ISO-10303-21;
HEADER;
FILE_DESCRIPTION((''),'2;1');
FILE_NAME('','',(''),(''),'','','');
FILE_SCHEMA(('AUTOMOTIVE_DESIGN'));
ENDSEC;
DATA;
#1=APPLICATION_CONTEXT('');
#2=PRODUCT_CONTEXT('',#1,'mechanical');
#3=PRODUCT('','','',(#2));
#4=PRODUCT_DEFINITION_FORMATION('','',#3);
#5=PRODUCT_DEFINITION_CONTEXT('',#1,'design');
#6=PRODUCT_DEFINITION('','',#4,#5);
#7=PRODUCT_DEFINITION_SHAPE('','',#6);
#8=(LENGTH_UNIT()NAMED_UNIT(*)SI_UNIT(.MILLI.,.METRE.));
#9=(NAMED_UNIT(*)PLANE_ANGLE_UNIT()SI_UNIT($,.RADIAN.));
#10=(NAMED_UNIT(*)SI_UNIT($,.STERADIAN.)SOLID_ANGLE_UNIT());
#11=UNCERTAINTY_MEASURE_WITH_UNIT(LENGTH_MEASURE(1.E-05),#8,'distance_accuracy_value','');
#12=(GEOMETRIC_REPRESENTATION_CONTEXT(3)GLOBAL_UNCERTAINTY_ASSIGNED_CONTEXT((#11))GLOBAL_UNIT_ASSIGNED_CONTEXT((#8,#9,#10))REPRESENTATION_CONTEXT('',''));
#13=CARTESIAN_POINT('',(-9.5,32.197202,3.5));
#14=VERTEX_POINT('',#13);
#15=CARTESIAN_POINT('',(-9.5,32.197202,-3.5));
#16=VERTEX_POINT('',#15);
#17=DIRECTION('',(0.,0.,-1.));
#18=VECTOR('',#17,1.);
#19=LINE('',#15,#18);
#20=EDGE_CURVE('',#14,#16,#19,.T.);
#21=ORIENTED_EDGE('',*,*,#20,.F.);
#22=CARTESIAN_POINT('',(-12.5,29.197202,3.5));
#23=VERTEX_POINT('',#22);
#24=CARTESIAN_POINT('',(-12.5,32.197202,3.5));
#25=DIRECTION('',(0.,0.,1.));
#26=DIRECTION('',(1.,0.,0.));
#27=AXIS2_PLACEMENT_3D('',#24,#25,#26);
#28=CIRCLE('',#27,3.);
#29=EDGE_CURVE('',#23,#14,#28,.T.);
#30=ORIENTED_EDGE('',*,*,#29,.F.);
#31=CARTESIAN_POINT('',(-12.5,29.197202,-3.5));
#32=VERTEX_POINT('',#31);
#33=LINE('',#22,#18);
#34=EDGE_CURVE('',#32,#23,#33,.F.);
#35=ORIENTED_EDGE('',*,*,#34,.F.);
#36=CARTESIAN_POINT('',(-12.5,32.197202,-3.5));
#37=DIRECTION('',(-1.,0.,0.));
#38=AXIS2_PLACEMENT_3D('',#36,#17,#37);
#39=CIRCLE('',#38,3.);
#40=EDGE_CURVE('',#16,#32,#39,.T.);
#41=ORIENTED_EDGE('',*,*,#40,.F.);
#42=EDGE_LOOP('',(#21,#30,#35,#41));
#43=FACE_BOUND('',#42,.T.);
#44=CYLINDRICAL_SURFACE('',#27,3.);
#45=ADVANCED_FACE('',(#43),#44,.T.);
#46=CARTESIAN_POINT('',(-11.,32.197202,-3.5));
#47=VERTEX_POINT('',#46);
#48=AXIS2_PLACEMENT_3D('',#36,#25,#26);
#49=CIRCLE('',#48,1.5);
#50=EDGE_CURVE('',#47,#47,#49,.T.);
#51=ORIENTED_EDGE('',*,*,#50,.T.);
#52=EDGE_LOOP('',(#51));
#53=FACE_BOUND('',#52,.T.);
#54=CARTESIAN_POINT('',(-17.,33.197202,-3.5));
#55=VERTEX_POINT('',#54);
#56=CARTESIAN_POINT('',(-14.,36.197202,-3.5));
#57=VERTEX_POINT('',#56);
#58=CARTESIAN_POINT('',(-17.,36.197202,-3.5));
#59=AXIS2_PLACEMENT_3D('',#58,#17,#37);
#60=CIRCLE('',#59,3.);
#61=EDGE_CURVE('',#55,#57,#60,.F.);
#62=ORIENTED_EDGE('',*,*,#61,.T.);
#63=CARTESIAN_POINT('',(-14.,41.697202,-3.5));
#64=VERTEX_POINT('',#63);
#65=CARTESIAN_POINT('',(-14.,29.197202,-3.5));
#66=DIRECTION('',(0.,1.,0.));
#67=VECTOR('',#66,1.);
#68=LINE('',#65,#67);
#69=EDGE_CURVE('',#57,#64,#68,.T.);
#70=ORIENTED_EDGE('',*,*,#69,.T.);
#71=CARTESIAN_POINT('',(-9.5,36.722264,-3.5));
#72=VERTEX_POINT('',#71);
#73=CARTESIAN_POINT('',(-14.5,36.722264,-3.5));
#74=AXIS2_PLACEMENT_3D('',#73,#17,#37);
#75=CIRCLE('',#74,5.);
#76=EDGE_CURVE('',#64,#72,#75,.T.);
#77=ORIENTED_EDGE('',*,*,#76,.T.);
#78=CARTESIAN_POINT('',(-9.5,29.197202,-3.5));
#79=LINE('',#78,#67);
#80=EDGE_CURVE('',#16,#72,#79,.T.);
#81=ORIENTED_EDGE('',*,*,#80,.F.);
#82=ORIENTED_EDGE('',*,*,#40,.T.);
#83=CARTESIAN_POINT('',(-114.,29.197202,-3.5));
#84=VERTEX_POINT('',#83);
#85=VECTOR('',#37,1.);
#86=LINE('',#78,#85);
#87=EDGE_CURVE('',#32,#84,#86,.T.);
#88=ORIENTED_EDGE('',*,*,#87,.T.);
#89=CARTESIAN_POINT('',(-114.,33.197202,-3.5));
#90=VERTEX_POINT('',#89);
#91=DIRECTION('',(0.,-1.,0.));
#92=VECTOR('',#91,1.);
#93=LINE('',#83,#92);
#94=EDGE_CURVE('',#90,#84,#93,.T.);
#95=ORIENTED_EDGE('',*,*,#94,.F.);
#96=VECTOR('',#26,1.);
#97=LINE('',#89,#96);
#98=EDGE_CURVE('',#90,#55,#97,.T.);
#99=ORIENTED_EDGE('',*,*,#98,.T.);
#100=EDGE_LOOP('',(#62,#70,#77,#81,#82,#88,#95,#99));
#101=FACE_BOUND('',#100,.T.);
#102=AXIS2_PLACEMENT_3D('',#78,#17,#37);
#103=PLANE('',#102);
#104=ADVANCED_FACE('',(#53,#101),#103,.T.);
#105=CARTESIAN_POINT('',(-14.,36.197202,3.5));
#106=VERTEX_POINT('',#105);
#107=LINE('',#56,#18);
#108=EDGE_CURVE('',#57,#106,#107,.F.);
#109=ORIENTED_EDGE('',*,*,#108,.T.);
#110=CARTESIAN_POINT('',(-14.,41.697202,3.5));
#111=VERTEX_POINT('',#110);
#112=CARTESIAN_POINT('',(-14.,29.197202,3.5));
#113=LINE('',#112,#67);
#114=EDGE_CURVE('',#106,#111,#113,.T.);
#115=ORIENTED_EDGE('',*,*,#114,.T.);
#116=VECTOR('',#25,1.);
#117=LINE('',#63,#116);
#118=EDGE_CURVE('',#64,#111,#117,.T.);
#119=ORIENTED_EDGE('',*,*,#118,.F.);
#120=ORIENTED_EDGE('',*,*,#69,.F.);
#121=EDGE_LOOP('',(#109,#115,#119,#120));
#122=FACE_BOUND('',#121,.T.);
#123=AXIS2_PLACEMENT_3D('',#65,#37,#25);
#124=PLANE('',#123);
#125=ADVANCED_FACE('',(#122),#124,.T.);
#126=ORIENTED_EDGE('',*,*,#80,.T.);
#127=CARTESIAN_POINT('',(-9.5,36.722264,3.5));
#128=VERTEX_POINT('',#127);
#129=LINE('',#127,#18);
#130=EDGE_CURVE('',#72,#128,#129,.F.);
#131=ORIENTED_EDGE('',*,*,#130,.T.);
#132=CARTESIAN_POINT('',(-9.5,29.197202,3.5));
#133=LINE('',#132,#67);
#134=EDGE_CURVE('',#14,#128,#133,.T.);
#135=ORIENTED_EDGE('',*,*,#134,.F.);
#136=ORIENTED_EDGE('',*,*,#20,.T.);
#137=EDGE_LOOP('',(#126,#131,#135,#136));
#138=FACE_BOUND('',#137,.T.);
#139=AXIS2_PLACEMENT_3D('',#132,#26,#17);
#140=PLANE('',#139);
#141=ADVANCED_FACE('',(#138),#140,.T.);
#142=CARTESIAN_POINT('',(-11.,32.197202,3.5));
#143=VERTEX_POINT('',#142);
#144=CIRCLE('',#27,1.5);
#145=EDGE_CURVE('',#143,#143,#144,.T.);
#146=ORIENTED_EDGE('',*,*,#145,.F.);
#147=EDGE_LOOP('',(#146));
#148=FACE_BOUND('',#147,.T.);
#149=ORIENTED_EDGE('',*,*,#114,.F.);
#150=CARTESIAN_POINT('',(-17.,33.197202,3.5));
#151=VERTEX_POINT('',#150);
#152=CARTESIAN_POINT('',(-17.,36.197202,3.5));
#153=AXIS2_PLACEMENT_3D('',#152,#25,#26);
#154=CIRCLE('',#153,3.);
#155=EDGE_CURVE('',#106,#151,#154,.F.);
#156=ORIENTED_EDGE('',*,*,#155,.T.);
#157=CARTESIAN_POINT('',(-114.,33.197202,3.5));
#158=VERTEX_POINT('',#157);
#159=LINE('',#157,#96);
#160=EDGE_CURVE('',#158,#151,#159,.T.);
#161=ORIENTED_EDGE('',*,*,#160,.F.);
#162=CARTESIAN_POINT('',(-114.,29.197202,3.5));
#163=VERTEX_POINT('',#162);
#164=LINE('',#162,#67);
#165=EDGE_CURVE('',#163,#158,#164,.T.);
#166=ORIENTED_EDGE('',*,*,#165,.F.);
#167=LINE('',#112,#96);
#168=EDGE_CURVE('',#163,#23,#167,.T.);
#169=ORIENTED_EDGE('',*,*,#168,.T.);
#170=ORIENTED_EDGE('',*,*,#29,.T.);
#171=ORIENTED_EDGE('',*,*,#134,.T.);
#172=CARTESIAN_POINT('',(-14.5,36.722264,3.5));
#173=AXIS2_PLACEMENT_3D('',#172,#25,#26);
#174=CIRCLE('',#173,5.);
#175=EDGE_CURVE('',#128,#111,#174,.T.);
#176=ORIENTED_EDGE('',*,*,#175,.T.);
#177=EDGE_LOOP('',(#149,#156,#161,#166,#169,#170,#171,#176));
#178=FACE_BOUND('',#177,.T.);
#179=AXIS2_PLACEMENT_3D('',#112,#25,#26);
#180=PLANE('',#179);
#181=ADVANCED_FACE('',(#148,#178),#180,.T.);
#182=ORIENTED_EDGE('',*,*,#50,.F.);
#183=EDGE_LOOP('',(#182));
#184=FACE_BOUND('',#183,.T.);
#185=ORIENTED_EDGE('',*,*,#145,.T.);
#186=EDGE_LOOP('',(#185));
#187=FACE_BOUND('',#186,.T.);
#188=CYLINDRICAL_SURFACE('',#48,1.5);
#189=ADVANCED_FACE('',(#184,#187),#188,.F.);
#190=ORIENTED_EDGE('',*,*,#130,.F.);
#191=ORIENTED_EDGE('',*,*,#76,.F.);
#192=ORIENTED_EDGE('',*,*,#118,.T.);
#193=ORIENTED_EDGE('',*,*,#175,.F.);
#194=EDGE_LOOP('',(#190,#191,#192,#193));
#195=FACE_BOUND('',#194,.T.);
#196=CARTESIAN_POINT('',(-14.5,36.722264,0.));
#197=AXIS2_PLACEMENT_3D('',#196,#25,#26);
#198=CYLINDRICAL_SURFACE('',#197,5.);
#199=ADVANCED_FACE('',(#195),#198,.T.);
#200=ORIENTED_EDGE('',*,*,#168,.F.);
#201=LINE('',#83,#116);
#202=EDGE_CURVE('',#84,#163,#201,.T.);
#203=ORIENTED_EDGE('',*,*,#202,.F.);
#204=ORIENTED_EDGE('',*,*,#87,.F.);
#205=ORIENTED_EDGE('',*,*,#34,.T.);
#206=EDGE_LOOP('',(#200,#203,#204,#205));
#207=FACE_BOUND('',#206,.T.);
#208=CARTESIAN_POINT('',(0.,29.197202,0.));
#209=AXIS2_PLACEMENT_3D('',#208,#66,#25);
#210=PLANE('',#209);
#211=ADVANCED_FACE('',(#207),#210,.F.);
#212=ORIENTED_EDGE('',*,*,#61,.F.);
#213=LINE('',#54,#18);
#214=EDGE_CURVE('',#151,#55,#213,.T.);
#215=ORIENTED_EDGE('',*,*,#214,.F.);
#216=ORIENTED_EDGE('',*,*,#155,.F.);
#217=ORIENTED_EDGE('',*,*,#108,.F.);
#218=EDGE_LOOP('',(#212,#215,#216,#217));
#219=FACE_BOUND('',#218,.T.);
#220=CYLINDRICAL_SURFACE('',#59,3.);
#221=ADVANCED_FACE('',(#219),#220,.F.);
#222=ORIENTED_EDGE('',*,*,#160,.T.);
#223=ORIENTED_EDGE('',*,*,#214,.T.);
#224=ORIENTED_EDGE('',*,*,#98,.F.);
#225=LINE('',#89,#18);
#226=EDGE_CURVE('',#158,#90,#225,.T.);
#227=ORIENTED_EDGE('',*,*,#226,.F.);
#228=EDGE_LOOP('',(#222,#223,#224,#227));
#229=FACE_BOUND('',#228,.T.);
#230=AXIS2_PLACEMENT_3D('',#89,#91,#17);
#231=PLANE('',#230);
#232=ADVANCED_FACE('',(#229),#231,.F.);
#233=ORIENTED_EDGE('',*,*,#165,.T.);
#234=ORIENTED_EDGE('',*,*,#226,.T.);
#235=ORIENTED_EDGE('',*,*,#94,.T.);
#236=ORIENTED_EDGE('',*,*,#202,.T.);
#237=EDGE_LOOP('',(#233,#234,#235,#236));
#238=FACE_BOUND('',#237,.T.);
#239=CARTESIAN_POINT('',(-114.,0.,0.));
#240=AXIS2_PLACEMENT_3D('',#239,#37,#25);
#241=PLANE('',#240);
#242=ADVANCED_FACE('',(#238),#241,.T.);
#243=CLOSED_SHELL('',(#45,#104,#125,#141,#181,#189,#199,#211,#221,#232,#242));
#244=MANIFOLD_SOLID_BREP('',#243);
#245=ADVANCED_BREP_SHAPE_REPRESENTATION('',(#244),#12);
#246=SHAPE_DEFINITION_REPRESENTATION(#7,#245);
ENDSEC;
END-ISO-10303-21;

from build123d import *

# Parameters (mm, degrees)
EXTRUDE_1_DEPTH          = 5
EXTRUDE_1_DEPTH_BACK     = 7.5
SKETCH_1_W               = 4.5
SKETCH_1_H               = 7
SKETCH_2_W               = 4.5
SKETCH_2_H               = 7
EXTRUDE_2_DEPTH          = 4
FILLET_1_R               = 3
SKETCH_3_W               = 7
SKETCH_3_H               = 4
EXTRUDE_3_DEPTH          = 100
FILLET_2_R               = 5
FILLET_3_R               = 3
CUT_EXTRUDE_1_DEPTH      = 122.436842092
CUT_EXTRUDE_1_DEPTH_BACK = 122.436842092
SKETCH_6_R               = 1.5


with BuildPart() as part:
    # Эскиз1 → Бобышка-Вытянуть1 (new, two sides: drawn at the far end of the back side and taken through both)
    with BuildSketch(Plane(origin=(0, 36.697201552, 0), x_dir=(1, 0, 0), z_dir=(0, 1, 0)).offset(-EXTRUDE_1_DEPTH_BACK)):
        with Locations((-11.75, 0)):
            Rectangle(SKETCH_1_W, SKETCH_1_H)
    extrude(amount=EXTRUDE_1_DEPTH + EXTRUDE_1_DEPTH_BACK)

    # Эскиз2 → Бобышка-Вытянуть2 (add)
    with BuildSketch(Plane.XZ.offset(-29.197201552)):
        with Locations((-11.75, 0)):
            Rectangle(SKETCH_2_W, SKETCH_2_H)
    extrude(amount=-EXTRUDE_2_DEPTH)

    # Скругление1
    fillet_1_edges = [part.edges().sort_by_distance(p)[0] for p in [
        (-9.5, 29.197201552, 0),
    ]]
    fillet(fillet_1_edges, radius=FILLET_1_R)

    # Эскиз3 → Бобышка-Вытянуть3 (add)
    with BuildSketch(Plane.ZY.offset(14)):
        with Locations((0, 31.197201552)):
            Rectangle(SKETCH_3_W, SKETCH_3_H)
    extrude(amount=EXTRUDE_3_DEPTH)

    # Скругление2
    # the kernel refuses this fillet: 5 mm, written as the material it takes off along each edge
    with BuildSketch(Plane(origin=(-9.5, 41.697201552, 15.937342964), x_dir=(-1, 0, 0), z_dir=(0, 0, -1))) as fillet_2_piece_1:
        with BuildLine():
            CenterArc((5, -4.974937186), FILLET_2_R, 95.739170477, 84.260829523)
            Line((0, -4.974937186), (-0.1, -4.974937186))
            Line((-0.1, -4.974937186), (-0.1, 0))
            Line((-0.1, 0), (0, 0.1))
            ThreePointArc((0, 0.1), (2.25, 0.1), (4.49, 0.099498744))
            Line((4.49, 0.099498744), (4.5, 0))
        make_face()
    extrude(amount=31.874685928, mode=Mode.SUBTRACT)

    # Скругление3
    fillet_3_edges = [part.edges().sort_by_distance(p)[0] for p in [
        (-14, 33.197201552, 0),
    ]]
    fillet(fillet_3_edges, radius=FILLET_3_R)

    # Эскиз6 → Вырез-Вытянуть1 (cut, two sides: drawn at the far end of the back side and taken through both)
    with BuildSketch(Plane.XY.offset(-CUT_EXTRUDE_1_DEPTH_BACK)):
        with Locations((-12.5, 32.197201552)):
            Circle(SKETCH_6_R)
    extrude(amount=CUT_EXTRUDE_1_DEPTH + CUT_EXTRUDE_1_DEPTH_BACK, mode=Mode.SUBTRACT)


solid = part.part
